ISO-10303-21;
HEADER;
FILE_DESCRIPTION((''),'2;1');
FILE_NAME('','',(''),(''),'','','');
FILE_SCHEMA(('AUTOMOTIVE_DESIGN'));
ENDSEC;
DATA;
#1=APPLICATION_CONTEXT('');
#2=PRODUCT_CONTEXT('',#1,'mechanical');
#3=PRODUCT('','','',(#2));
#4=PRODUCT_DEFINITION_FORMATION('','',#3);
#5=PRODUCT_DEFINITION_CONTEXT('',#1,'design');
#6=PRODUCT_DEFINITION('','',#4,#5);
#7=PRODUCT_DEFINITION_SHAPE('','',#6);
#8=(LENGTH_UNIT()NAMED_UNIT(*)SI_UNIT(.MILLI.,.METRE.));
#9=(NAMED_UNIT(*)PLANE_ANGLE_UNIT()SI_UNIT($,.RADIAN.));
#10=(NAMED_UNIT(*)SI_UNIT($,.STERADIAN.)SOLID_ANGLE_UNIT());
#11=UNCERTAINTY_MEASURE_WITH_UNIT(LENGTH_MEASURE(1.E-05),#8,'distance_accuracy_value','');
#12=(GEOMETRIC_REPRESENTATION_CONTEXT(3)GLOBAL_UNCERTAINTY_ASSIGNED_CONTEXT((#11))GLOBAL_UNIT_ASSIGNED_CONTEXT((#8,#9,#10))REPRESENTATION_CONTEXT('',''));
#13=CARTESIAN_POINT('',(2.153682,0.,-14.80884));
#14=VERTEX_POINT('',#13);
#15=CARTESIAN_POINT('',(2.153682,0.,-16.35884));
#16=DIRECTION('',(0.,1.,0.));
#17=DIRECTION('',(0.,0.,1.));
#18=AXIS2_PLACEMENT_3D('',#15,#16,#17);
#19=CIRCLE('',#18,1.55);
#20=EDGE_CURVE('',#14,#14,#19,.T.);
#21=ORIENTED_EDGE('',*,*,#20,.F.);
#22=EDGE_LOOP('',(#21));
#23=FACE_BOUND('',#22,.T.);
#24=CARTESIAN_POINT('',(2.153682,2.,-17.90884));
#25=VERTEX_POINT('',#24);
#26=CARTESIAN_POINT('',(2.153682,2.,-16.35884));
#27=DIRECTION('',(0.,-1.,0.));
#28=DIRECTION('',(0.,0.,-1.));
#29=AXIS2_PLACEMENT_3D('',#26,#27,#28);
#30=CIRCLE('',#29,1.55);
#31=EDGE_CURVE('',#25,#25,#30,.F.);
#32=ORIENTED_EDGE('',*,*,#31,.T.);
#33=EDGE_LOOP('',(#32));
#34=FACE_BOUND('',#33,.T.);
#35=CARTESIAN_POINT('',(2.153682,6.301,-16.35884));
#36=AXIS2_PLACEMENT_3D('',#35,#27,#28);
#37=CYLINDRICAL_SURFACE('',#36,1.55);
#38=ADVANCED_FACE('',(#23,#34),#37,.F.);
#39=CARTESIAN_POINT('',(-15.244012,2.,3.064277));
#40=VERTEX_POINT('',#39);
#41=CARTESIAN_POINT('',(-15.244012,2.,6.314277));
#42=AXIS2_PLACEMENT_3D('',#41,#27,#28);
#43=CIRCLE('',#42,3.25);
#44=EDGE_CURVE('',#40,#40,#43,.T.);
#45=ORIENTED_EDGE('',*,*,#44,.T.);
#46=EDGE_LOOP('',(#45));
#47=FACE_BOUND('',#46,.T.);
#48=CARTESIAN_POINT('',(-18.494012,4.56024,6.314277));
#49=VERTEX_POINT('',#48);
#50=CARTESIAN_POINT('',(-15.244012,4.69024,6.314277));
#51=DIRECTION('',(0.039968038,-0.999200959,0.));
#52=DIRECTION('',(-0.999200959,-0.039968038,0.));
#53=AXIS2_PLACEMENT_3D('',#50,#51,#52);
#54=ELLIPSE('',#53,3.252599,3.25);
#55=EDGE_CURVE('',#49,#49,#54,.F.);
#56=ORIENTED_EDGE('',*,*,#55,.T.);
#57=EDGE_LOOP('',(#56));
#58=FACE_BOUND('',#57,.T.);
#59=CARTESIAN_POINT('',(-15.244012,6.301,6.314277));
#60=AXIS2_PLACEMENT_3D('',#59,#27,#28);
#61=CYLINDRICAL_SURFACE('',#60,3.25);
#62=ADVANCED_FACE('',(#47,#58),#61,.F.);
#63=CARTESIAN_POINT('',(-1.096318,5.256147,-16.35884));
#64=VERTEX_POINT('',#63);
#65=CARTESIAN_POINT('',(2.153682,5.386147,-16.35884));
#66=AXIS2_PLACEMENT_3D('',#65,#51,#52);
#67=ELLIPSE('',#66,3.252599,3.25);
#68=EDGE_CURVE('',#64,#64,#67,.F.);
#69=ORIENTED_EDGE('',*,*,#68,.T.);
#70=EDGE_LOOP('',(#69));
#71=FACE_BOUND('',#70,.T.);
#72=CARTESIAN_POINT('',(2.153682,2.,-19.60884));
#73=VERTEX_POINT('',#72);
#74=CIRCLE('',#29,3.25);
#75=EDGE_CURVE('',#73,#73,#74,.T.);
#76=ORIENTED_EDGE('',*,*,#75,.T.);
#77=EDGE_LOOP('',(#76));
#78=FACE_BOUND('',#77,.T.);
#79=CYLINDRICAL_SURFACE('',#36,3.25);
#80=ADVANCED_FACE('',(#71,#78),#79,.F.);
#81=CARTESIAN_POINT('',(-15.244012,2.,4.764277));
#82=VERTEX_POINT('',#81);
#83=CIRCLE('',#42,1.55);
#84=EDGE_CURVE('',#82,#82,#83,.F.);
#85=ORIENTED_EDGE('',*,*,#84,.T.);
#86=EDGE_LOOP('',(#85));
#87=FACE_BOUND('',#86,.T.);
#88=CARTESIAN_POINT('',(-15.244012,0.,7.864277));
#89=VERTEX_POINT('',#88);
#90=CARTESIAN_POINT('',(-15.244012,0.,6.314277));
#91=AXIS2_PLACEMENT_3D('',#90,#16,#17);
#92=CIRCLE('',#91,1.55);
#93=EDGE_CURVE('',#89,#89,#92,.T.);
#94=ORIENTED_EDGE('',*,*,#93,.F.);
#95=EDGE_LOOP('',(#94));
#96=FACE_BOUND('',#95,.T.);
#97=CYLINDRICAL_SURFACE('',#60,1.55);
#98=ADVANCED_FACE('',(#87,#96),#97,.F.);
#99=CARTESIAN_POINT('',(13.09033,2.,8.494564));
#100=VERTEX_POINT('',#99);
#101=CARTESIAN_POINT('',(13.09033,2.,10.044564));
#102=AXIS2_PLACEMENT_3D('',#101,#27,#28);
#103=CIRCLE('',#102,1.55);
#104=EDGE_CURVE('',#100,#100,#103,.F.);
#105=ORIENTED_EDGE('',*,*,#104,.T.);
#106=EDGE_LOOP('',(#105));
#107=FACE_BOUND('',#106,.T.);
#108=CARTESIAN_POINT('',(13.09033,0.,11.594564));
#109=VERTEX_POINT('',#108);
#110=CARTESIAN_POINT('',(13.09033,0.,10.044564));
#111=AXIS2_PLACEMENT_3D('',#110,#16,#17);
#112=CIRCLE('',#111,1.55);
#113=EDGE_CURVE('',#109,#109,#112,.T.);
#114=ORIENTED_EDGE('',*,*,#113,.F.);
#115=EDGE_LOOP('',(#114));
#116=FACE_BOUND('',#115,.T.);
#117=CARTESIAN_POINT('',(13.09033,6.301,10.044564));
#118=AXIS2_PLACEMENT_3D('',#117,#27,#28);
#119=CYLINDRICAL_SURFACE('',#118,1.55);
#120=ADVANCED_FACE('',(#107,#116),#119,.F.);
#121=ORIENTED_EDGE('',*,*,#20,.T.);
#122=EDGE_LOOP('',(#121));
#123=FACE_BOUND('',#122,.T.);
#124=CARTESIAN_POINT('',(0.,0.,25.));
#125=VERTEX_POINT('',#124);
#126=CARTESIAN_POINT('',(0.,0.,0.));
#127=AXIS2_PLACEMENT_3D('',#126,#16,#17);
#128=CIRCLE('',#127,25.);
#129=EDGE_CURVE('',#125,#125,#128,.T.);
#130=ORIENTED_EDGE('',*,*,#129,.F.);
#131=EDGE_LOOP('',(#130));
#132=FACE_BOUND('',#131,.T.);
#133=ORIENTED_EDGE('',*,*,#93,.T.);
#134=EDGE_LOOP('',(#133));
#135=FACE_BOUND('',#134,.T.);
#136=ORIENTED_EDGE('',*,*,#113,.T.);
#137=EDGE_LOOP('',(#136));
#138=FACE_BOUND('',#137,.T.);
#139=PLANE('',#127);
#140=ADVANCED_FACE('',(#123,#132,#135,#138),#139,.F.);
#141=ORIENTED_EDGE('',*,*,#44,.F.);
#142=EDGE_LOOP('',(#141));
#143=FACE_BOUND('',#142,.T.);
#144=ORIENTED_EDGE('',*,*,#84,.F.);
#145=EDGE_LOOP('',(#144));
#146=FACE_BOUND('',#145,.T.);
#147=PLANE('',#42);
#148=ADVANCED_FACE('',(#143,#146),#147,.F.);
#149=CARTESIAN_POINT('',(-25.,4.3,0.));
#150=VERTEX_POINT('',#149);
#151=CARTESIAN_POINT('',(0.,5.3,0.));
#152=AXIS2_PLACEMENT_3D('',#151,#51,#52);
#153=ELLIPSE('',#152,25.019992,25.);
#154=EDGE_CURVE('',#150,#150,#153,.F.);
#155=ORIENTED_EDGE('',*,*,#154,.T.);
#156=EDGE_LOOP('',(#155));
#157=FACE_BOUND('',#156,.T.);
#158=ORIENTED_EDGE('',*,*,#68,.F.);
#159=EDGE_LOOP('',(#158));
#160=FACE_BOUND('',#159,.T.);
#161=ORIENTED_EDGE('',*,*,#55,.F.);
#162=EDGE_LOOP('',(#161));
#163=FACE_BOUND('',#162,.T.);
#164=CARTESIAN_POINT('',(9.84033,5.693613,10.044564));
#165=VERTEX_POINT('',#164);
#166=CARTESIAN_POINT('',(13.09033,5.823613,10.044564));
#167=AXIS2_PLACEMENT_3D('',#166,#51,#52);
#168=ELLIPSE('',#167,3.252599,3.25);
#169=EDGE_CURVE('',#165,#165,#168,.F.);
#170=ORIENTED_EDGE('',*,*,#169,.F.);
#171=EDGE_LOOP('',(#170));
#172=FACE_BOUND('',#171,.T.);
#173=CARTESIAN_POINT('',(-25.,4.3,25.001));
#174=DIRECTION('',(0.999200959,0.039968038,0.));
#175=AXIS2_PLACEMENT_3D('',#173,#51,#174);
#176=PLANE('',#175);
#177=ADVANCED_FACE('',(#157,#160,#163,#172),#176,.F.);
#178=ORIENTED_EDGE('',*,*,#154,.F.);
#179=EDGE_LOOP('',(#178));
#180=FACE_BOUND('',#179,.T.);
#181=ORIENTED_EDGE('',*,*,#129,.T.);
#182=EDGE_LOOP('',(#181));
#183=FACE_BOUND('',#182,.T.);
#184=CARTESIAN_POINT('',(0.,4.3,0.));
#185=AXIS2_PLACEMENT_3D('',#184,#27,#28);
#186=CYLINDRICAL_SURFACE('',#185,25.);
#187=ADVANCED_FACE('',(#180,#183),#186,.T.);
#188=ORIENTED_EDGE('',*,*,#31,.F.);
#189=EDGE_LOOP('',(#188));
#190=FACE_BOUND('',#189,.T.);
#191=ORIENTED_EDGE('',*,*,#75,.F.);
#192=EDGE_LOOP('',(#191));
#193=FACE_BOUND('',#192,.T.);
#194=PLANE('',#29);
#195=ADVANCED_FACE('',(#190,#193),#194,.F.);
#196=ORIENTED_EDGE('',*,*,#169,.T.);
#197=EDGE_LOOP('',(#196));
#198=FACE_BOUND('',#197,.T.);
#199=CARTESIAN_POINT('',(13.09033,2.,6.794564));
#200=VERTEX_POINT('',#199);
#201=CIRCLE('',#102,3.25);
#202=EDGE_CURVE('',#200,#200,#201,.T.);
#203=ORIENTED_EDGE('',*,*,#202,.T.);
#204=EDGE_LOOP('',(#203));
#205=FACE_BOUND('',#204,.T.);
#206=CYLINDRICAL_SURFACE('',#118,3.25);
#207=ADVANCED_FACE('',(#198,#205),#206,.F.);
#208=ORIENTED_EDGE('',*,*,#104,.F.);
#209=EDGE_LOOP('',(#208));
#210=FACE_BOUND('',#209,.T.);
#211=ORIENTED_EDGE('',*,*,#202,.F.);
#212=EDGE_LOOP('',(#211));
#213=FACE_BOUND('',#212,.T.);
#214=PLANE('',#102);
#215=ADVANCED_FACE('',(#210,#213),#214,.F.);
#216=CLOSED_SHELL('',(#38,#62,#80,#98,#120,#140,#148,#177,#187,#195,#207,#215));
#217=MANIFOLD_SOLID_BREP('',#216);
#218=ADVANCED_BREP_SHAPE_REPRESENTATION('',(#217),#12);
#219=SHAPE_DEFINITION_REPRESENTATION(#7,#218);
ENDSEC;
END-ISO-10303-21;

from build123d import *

# Parameters (mm, degrees)
SKETCH1_R                            = 25
BOSS_EXTRUDE1_DEPTH                  = 4.3
BOSS_EXTRUDE2_REACH                  = 37.616
BOSS_EXTRUDE2_END_RADIUS             = 25
BOSS_EXTRUDE2_DIRECTION_2_REACH      = 37.616
BOSS_EXTRUDE2_DIRECTION_2_END_RADIUS = 25
CUT_EXTRUDE1_REACH                   = 37.912
SKETCH3_R                            = 1.55
CUT_EXTRUDE2_REACH                   = 37.616
SKETCH4_R                            = 3.25


with BuildPart() as part:
    # Sketch1 → Boss-Extrude1 (new body)
    with BuildSketch(Plane(origin=(0, 0, 0), x_dir=(1, 0, 0), z_dir=(0, 1, 0))):
        Circle(SKETCH1_R)
    extrude(amount=BOSS_EXTRUDE1_DEPTH)

    # Boss-Extrude2: up to this cylinder (the profile starts inside it)
    boss_extrude2_end = Plane(origin=(0, 4.966667, 0), z_dir=(0, -1, 0)) * Cylinder(BOSS_EXTRUDE2_END_RADIUS, 126.232, mode=Mode.PRIVATE)
    # Sketch2 → Boss-Extrude2 (add, up to the surface)
    with BuildSketch(Plane.XY, mode=Mode.PRIVATE) as boss_extrude2_sk1:
        Polygon((-25, 4.3), (25, 6.3), (25, 4.3), align=None)
    boss_extrude2_tool1 = extrude(boss_extrude2_sk1.sketch, amount=BOSS_EXTRUDE2_REACH, mode=Mode.PRIVATE) & boss_extrude2_end
    add(boss_extrude2_tool1.solids().sort_by_distance((8.333333, 4.966667, 0))[0])

    # Boss-Extrude2 direction 2: up to this cylinder (the profile starts inside it)
    boss_extrude2_direction_2_end = Plane(origin=(0, 4.966667, 0), z_dir=(0, -1, 0)) * Cylinder(BOSS_EXTRUDE2_DIRECTION_2_END_RADIUS, 126.232, mode=Mode.PRIVATE)
    # Sketch2 → Boss-Extrude2 direction 2 (add, up to the surface)
    with BuildSketch(Plane.XY, mode=Mode.PRIVATE) as boss_extrude2_direction_2_sk1:
        Polygon((-25, 4.3), (25, 6.3), (25, 4.3), align=None)
    boss_extrude2_direction_2_tool1 = extrude(boss_extrude2_direction_2_sk1.sketch, amount=-BOSS_EXTRUDE2_DIRECTION_2_REACH, mode=Mode.PRIVATE) & boss_extrude2_direction_2_end
    add(boss_extrude2_direction_2_tool1.solids().sort_by_distance((8.333333, 4.966667, 0))[0])

    # Sketch3 → Cut-Extrude1 (cut, up to next)
    with BuildSketch(Plane(origin=(0, 0, 0), x_dir=(1, 0, 0), z_dir=(0, 1, 0)), mode=Mode.PRIVATE) as cut_extrude1_sk1:
        with Locations((-15.244012286, -6.314276634)):
            Circle(SKETCH3_R)
    cut_extrude1_tool1 = extrude(cut_extrude1_sk1.sketch, amount=CUT_EXTRUDE1_REACH, mode=Mode.PRIVATE) & part.part
    # Sketch3 → Cut-Extrude1 (cut, up to next)
    with BuildSketch(Plane(origin=(0, 0, 0), x_dir=(1, 0, 0), z_dir=(0, 1, 0)), mode=Mode.PRIVATE) as cut_extrude1_sk2:
        with Locations((2.153682172, 16.358840213)):
            Circle(SKETCH3_R)
    cut_extrude1_tool2 = extrude(cut_extrude1_sk2.sketch, amount=CUT_EXTRUDE1_REACH, mode=Mode.PRIVATE) & part.part
    # Sketch3 → Cut-Extrude1 (cut, up to next)
    with BuildSketch(Plane(origin=(0, 0, 0), x_dir=(1, 0, 0), z_dir=(0, 1, 0)), mode=Mode.PRIVATE) as cut_extrude1_sk3:
        with Locations((13.090330115, -10.044563579)):
            Circle(SKETCH3_R)
    cut_extrude1_tool3 = extrude(cut_extrude1_sk3.sketch, amount=CUT_EXTRUDE1_REACH, mode=Mode.PRIVATE) & part.part
    add(cut_extrude1_tool1.solids().sort_by_distance((-15.244012, 0, 6.314277))[0], mode=Mode.SUBTRACT)
    add(cut_extrude1_tool2.solids().sort_by_distance((2.153682, 0, -16.35884))[0], mode=Mode.SUBTRACT)
    add(cut_extrude1_tool3.solids().sort_by_distance((13.09033, 0, 10.044564))[0], mode=Mode.SUBTRACT)

    # Sketch4 → Cut-Extrude2 (cut, up to next)
    with BuildSketch(Plane(origin=(0, 2, 0), x_dir=(-1, 0, 0), z_dir=(0, -1, 0)), mode=Mode.PRIVATE) as cut_extrude2_sk1:
        with Locations((-2.153682172, 16.358840213)):
            Circle(SKETCH4_R)
    cut_extrude2_tool1 = extrude(cut_extrude2_sk1.sketch, amount=-CUT_EXTRUDE2_REACH, mode=Mode.PRIVATE) & part.part
    # Sketch4 → Cut-Extrude2 (cut, up to next)
    with BuildSketch(Plane(origin=(0, 2, 0), x_dir=(-1, 0, 0), z_dir=(0, -1, 0)), mode=Mode.PRIVATE) as cut_extrude2_sk2:
        with Locations((15.244012286, -6.314276634)):
            Circle(SKETCH4_R)
    cut_extrude2_tool2 = extrude(cut_extrude2_sk2.sketch, amount=-CUT_EXTRUDE2_REACH, mode=Mode.PRIVATE) & part.part
    # Sketch4 → Cut-Extrude2 (cut, up to next)
    with BuildSketch(Plane(origin=(0, 2, 0), x_dir=(-1, 0, 0), z_dir=(0, -1, 0)), mode=Mode.PRIVATE) as cut_extrude2_sk3:
        with Locations((-13.090330115, -10.044563579)):
            Circle(SKETCH4_R)
    cut_extrude2_tool3 = extrude(cut_extrude2_sk3.sketch, amount=-CUT_EXTRUDE2_REACH, mode=Mode.PRIVATE) & part.part
    add(cut_extrude2_tool1.solids().sort_by_distance((2.153682, 2, -16.35884))[0], mode=Mode.SUBTRACT)
    add(cut_extrude2_tool2.solids().sort_by_distance((-15.244012, 2, 6.314277))[0], mode=Mode.SUBTRACT)
    add(cut_extrude2_tool3.solids().sort_by_distance((13.09033, 2, 10.044564))[0], mode=Mode.SUBTRACT)


solid = part.part
